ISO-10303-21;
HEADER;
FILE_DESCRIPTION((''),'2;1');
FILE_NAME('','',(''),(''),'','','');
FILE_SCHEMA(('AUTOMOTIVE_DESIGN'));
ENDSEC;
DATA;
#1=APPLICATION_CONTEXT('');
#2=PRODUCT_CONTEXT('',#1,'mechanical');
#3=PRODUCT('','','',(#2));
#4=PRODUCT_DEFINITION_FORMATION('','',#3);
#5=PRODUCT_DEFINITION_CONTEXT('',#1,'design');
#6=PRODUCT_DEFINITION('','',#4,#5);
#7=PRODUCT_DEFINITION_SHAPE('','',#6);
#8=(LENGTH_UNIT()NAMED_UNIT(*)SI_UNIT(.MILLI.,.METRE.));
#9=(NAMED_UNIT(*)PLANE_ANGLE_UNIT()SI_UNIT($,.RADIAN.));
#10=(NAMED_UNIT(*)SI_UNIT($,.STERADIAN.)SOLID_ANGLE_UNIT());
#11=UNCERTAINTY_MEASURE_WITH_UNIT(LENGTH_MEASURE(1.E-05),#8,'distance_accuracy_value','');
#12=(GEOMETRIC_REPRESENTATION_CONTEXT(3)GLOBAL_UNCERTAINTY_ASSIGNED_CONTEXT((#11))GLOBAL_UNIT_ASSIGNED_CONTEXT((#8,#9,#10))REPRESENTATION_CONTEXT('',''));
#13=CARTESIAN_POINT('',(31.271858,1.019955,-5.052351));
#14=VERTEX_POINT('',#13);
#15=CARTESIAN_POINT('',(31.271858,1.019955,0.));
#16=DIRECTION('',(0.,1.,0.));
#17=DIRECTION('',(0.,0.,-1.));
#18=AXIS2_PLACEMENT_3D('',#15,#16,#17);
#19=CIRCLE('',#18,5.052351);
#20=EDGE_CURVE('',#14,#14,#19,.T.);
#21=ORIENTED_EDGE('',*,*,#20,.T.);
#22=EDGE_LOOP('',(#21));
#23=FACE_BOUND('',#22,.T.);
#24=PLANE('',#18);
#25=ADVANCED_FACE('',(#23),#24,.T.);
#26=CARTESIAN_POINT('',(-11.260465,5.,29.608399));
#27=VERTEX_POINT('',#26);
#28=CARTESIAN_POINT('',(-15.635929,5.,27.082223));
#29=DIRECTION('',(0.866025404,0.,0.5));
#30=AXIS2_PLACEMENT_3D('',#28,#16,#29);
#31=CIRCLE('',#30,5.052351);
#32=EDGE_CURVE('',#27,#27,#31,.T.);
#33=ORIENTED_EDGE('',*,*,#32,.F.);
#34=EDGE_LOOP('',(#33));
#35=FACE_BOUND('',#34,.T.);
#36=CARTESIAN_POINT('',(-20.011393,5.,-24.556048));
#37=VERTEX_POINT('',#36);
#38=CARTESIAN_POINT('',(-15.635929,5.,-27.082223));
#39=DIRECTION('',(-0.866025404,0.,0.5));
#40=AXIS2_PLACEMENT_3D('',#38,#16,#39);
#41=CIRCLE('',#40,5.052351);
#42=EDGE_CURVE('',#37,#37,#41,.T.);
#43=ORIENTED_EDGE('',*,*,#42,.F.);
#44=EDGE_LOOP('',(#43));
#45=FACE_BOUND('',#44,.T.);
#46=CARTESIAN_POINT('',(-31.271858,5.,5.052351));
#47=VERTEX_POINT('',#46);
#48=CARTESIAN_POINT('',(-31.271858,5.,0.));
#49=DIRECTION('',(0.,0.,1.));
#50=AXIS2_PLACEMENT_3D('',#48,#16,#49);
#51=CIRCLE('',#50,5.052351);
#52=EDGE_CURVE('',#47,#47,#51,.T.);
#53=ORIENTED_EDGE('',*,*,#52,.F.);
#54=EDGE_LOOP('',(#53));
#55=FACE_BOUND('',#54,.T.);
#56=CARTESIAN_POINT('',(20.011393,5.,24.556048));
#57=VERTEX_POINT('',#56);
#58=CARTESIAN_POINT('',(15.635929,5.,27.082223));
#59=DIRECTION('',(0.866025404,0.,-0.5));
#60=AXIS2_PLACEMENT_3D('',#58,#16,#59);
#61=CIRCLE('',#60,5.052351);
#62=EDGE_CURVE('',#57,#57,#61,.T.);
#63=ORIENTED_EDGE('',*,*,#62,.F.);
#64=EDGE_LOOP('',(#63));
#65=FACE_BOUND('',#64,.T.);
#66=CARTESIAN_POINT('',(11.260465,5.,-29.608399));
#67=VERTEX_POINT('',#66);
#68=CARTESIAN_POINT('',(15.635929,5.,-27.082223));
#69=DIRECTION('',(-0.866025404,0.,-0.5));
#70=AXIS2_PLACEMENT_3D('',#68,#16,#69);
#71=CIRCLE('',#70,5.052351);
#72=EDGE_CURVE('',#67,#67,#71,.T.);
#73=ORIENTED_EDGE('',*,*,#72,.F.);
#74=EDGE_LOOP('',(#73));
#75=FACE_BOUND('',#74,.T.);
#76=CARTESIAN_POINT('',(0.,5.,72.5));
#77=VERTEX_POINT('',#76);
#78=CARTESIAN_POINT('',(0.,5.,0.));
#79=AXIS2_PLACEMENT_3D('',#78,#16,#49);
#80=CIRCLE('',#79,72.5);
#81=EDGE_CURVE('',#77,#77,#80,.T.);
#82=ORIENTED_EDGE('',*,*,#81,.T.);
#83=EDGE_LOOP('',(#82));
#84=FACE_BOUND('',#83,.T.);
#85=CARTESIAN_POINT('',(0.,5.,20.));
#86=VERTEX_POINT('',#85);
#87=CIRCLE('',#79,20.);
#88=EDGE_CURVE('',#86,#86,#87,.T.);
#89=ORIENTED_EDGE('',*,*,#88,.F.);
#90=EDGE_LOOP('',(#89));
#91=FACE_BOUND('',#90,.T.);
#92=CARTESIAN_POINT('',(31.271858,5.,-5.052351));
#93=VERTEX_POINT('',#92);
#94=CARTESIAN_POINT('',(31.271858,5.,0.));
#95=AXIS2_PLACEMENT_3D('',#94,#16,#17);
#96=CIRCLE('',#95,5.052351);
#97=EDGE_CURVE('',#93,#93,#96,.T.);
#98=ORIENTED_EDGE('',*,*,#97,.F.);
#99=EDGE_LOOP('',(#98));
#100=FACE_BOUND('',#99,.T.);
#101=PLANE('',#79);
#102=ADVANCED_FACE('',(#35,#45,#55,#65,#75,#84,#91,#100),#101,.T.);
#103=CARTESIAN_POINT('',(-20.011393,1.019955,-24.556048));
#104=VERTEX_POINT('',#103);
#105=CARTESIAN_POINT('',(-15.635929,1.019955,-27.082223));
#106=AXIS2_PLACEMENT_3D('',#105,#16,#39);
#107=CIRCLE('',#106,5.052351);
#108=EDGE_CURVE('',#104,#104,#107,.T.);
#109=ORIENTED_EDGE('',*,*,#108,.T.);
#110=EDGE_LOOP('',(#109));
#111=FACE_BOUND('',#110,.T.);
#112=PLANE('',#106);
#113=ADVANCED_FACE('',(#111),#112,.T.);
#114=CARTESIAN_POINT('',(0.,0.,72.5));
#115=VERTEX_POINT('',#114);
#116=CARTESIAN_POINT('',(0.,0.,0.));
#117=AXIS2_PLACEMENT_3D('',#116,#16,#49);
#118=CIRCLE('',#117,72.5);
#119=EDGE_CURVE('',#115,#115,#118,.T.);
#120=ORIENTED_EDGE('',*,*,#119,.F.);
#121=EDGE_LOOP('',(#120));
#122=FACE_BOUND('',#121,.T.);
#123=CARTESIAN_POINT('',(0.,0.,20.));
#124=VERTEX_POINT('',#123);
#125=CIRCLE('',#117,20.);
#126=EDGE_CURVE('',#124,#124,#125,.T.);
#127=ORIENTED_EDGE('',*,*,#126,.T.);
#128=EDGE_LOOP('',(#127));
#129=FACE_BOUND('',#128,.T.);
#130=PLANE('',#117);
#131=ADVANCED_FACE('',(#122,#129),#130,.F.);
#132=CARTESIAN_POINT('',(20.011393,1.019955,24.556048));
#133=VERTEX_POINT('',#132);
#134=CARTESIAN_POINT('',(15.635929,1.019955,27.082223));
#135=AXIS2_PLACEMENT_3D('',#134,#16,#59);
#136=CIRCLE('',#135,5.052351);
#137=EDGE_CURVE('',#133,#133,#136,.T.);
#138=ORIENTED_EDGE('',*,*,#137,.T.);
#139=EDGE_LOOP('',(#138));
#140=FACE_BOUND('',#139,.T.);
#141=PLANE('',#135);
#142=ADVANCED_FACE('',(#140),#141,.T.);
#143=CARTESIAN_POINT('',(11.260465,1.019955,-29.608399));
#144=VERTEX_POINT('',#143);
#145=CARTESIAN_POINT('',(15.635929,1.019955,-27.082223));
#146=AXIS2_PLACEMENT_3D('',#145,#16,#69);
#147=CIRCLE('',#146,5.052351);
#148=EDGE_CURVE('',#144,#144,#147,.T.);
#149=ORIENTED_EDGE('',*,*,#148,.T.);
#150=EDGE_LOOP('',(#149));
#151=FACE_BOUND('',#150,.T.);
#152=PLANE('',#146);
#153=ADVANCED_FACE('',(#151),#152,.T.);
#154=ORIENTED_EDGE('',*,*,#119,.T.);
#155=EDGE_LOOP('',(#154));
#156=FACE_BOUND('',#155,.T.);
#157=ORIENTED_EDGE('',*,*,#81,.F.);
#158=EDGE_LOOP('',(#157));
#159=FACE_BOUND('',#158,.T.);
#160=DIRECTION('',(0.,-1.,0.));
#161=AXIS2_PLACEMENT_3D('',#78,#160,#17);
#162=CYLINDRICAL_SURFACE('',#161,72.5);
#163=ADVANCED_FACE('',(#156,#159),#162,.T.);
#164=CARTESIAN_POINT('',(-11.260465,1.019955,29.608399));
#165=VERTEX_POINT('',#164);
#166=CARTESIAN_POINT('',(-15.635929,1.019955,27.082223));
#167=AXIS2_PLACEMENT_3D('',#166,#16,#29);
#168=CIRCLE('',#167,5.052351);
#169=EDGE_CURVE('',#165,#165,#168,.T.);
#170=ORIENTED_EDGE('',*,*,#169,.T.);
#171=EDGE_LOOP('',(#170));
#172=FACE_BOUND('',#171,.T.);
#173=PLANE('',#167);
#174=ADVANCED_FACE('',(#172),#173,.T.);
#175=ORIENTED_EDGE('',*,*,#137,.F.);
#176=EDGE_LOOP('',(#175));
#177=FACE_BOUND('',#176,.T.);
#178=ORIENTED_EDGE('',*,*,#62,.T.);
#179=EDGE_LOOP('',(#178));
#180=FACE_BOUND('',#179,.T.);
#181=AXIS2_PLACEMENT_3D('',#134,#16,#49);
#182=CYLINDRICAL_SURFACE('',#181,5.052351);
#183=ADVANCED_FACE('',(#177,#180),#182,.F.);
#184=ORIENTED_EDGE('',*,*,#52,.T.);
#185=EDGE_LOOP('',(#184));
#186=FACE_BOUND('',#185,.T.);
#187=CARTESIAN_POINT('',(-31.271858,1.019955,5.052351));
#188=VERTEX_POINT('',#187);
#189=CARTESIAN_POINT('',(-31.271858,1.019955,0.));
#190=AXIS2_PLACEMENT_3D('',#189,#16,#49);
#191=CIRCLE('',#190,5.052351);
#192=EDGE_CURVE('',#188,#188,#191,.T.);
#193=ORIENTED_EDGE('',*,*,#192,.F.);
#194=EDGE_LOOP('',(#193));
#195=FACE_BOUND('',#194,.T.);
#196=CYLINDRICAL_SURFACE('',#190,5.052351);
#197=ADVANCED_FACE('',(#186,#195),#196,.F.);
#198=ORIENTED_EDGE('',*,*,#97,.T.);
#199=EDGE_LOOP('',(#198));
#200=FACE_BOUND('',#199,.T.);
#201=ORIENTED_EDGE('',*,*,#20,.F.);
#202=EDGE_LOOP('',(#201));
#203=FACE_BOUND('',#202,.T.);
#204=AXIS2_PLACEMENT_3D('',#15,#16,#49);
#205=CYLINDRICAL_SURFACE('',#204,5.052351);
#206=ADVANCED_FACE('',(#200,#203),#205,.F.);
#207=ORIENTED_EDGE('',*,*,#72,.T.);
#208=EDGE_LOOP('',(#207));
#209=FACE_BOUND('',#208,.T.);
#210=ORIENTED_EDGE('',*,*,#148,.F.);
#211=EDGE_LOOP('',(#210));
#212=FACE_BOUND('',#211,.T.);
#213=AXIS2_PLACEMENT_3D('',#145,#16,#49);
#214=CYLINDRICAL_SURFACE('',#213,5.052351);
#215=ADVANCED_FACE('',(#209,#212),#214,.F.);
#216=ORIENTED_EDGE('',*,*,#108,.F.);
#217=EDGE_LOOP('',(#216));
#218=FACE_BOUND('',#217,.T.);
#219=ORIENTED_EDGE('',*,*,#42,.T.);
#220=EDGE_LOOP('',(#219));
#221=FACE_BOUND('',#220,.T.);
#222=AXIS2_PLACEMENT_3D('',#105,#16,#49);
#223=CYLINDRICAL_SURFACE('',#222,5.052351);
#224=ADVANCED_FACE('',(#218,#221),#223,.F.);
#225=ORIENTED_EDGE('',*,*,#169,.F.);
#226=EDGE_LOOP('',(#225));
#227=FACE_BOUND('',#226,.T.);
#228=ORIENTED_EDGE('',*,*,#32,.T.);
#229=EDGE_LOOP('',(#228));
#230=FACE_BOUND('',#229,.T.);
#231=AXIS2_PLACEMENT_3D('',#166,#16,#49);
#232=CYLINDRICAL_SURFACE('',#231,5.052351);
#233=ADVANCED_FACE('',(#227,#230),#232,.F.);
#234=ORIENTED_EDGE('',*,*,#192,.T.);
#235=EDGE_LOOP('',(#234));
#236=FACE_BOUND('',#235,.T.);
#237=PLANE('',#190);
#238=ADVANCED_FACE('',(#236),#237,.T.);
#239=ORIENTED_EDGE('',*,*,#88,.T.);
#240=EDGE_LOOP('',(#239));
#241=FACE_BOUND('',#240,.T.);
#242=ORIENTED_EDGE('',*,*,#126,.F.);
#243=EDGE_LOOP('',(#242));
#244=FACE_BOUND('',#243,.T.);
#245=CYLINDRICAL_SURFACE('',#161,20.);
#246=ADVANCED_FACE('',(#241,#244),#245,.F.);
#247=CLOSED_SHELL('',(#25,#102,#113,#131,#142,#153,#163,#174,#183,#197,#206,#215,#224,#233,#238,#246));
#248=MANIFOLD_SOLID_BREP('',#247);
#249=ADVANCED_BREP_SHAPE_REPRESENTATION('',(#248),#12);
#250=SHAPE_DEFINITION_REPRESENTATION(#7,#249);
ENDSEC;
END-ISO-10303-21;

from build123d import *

# Parameters (mm, degrees)
SKETCH1_R           = 72.5
BOSS_EXTRUDE1_DEPTH = 5
SKETCH2_R           = 20
CUT_EXTRUDE1_DEPTH  = 103.652325838
SKETCH3_R           = 5.052350851
CUT_EXTRUDE2_DEPTH  = 3.980044721
CIRPATTERN1_COUNT   = 6


with BuildPart() as part:
    # Sketch1 → Boss-Extrude1 (new body)
    with BuildSketch(Plane(origin=(0, 0, 0), x_dir=(1, 0, 0), z_dir=(0, 1, 0))):
        Circle(SKETCH1_R)
    extrude(amount=BOSS_EXTRUDE1_DEPTH)

    # Sketch2 → Cut-Extrude1 (cut, through all)
    with BuildSketch(Plane(origin=(0, 0, 0), x_dir=(1, 0, 0), z_dir=(0, 1, 0))):
        Circle(SKETCH2_R)
    extrude(amount=CUT_EXTRUDE1_DEPTH, mode=Mode.SUBTRACT)

    # Sketch3 → Cut-Extrude2 (cut)
    with BuildSketch(Plane(origin=(0, 5, 0), x_dir=(1, 0, 0), z_dir=(0, 1, 0))):
        with Locations((-31.271857753, 0)):
            Circle(SKETCH3_R)
    cut_extrude2 = extrude(amount=-CUT_EXTRUDE2_DEPTH, mode=Mode.SUBTRACT)

    # CirPattern1: Cut-Extrude2 ×6 about axis
    cirpattern1_axis = Axis((0, 0, 0), (0, 1, 0))
    for i in range(1, CIRPATTERN1_COUNT):
        add(cut_extrude2.rotate(cirpattern1_axis, i * 360 / CIRPATTERN1_COUNT), mode=Mode.SUBTRACT)


solid = part.part
